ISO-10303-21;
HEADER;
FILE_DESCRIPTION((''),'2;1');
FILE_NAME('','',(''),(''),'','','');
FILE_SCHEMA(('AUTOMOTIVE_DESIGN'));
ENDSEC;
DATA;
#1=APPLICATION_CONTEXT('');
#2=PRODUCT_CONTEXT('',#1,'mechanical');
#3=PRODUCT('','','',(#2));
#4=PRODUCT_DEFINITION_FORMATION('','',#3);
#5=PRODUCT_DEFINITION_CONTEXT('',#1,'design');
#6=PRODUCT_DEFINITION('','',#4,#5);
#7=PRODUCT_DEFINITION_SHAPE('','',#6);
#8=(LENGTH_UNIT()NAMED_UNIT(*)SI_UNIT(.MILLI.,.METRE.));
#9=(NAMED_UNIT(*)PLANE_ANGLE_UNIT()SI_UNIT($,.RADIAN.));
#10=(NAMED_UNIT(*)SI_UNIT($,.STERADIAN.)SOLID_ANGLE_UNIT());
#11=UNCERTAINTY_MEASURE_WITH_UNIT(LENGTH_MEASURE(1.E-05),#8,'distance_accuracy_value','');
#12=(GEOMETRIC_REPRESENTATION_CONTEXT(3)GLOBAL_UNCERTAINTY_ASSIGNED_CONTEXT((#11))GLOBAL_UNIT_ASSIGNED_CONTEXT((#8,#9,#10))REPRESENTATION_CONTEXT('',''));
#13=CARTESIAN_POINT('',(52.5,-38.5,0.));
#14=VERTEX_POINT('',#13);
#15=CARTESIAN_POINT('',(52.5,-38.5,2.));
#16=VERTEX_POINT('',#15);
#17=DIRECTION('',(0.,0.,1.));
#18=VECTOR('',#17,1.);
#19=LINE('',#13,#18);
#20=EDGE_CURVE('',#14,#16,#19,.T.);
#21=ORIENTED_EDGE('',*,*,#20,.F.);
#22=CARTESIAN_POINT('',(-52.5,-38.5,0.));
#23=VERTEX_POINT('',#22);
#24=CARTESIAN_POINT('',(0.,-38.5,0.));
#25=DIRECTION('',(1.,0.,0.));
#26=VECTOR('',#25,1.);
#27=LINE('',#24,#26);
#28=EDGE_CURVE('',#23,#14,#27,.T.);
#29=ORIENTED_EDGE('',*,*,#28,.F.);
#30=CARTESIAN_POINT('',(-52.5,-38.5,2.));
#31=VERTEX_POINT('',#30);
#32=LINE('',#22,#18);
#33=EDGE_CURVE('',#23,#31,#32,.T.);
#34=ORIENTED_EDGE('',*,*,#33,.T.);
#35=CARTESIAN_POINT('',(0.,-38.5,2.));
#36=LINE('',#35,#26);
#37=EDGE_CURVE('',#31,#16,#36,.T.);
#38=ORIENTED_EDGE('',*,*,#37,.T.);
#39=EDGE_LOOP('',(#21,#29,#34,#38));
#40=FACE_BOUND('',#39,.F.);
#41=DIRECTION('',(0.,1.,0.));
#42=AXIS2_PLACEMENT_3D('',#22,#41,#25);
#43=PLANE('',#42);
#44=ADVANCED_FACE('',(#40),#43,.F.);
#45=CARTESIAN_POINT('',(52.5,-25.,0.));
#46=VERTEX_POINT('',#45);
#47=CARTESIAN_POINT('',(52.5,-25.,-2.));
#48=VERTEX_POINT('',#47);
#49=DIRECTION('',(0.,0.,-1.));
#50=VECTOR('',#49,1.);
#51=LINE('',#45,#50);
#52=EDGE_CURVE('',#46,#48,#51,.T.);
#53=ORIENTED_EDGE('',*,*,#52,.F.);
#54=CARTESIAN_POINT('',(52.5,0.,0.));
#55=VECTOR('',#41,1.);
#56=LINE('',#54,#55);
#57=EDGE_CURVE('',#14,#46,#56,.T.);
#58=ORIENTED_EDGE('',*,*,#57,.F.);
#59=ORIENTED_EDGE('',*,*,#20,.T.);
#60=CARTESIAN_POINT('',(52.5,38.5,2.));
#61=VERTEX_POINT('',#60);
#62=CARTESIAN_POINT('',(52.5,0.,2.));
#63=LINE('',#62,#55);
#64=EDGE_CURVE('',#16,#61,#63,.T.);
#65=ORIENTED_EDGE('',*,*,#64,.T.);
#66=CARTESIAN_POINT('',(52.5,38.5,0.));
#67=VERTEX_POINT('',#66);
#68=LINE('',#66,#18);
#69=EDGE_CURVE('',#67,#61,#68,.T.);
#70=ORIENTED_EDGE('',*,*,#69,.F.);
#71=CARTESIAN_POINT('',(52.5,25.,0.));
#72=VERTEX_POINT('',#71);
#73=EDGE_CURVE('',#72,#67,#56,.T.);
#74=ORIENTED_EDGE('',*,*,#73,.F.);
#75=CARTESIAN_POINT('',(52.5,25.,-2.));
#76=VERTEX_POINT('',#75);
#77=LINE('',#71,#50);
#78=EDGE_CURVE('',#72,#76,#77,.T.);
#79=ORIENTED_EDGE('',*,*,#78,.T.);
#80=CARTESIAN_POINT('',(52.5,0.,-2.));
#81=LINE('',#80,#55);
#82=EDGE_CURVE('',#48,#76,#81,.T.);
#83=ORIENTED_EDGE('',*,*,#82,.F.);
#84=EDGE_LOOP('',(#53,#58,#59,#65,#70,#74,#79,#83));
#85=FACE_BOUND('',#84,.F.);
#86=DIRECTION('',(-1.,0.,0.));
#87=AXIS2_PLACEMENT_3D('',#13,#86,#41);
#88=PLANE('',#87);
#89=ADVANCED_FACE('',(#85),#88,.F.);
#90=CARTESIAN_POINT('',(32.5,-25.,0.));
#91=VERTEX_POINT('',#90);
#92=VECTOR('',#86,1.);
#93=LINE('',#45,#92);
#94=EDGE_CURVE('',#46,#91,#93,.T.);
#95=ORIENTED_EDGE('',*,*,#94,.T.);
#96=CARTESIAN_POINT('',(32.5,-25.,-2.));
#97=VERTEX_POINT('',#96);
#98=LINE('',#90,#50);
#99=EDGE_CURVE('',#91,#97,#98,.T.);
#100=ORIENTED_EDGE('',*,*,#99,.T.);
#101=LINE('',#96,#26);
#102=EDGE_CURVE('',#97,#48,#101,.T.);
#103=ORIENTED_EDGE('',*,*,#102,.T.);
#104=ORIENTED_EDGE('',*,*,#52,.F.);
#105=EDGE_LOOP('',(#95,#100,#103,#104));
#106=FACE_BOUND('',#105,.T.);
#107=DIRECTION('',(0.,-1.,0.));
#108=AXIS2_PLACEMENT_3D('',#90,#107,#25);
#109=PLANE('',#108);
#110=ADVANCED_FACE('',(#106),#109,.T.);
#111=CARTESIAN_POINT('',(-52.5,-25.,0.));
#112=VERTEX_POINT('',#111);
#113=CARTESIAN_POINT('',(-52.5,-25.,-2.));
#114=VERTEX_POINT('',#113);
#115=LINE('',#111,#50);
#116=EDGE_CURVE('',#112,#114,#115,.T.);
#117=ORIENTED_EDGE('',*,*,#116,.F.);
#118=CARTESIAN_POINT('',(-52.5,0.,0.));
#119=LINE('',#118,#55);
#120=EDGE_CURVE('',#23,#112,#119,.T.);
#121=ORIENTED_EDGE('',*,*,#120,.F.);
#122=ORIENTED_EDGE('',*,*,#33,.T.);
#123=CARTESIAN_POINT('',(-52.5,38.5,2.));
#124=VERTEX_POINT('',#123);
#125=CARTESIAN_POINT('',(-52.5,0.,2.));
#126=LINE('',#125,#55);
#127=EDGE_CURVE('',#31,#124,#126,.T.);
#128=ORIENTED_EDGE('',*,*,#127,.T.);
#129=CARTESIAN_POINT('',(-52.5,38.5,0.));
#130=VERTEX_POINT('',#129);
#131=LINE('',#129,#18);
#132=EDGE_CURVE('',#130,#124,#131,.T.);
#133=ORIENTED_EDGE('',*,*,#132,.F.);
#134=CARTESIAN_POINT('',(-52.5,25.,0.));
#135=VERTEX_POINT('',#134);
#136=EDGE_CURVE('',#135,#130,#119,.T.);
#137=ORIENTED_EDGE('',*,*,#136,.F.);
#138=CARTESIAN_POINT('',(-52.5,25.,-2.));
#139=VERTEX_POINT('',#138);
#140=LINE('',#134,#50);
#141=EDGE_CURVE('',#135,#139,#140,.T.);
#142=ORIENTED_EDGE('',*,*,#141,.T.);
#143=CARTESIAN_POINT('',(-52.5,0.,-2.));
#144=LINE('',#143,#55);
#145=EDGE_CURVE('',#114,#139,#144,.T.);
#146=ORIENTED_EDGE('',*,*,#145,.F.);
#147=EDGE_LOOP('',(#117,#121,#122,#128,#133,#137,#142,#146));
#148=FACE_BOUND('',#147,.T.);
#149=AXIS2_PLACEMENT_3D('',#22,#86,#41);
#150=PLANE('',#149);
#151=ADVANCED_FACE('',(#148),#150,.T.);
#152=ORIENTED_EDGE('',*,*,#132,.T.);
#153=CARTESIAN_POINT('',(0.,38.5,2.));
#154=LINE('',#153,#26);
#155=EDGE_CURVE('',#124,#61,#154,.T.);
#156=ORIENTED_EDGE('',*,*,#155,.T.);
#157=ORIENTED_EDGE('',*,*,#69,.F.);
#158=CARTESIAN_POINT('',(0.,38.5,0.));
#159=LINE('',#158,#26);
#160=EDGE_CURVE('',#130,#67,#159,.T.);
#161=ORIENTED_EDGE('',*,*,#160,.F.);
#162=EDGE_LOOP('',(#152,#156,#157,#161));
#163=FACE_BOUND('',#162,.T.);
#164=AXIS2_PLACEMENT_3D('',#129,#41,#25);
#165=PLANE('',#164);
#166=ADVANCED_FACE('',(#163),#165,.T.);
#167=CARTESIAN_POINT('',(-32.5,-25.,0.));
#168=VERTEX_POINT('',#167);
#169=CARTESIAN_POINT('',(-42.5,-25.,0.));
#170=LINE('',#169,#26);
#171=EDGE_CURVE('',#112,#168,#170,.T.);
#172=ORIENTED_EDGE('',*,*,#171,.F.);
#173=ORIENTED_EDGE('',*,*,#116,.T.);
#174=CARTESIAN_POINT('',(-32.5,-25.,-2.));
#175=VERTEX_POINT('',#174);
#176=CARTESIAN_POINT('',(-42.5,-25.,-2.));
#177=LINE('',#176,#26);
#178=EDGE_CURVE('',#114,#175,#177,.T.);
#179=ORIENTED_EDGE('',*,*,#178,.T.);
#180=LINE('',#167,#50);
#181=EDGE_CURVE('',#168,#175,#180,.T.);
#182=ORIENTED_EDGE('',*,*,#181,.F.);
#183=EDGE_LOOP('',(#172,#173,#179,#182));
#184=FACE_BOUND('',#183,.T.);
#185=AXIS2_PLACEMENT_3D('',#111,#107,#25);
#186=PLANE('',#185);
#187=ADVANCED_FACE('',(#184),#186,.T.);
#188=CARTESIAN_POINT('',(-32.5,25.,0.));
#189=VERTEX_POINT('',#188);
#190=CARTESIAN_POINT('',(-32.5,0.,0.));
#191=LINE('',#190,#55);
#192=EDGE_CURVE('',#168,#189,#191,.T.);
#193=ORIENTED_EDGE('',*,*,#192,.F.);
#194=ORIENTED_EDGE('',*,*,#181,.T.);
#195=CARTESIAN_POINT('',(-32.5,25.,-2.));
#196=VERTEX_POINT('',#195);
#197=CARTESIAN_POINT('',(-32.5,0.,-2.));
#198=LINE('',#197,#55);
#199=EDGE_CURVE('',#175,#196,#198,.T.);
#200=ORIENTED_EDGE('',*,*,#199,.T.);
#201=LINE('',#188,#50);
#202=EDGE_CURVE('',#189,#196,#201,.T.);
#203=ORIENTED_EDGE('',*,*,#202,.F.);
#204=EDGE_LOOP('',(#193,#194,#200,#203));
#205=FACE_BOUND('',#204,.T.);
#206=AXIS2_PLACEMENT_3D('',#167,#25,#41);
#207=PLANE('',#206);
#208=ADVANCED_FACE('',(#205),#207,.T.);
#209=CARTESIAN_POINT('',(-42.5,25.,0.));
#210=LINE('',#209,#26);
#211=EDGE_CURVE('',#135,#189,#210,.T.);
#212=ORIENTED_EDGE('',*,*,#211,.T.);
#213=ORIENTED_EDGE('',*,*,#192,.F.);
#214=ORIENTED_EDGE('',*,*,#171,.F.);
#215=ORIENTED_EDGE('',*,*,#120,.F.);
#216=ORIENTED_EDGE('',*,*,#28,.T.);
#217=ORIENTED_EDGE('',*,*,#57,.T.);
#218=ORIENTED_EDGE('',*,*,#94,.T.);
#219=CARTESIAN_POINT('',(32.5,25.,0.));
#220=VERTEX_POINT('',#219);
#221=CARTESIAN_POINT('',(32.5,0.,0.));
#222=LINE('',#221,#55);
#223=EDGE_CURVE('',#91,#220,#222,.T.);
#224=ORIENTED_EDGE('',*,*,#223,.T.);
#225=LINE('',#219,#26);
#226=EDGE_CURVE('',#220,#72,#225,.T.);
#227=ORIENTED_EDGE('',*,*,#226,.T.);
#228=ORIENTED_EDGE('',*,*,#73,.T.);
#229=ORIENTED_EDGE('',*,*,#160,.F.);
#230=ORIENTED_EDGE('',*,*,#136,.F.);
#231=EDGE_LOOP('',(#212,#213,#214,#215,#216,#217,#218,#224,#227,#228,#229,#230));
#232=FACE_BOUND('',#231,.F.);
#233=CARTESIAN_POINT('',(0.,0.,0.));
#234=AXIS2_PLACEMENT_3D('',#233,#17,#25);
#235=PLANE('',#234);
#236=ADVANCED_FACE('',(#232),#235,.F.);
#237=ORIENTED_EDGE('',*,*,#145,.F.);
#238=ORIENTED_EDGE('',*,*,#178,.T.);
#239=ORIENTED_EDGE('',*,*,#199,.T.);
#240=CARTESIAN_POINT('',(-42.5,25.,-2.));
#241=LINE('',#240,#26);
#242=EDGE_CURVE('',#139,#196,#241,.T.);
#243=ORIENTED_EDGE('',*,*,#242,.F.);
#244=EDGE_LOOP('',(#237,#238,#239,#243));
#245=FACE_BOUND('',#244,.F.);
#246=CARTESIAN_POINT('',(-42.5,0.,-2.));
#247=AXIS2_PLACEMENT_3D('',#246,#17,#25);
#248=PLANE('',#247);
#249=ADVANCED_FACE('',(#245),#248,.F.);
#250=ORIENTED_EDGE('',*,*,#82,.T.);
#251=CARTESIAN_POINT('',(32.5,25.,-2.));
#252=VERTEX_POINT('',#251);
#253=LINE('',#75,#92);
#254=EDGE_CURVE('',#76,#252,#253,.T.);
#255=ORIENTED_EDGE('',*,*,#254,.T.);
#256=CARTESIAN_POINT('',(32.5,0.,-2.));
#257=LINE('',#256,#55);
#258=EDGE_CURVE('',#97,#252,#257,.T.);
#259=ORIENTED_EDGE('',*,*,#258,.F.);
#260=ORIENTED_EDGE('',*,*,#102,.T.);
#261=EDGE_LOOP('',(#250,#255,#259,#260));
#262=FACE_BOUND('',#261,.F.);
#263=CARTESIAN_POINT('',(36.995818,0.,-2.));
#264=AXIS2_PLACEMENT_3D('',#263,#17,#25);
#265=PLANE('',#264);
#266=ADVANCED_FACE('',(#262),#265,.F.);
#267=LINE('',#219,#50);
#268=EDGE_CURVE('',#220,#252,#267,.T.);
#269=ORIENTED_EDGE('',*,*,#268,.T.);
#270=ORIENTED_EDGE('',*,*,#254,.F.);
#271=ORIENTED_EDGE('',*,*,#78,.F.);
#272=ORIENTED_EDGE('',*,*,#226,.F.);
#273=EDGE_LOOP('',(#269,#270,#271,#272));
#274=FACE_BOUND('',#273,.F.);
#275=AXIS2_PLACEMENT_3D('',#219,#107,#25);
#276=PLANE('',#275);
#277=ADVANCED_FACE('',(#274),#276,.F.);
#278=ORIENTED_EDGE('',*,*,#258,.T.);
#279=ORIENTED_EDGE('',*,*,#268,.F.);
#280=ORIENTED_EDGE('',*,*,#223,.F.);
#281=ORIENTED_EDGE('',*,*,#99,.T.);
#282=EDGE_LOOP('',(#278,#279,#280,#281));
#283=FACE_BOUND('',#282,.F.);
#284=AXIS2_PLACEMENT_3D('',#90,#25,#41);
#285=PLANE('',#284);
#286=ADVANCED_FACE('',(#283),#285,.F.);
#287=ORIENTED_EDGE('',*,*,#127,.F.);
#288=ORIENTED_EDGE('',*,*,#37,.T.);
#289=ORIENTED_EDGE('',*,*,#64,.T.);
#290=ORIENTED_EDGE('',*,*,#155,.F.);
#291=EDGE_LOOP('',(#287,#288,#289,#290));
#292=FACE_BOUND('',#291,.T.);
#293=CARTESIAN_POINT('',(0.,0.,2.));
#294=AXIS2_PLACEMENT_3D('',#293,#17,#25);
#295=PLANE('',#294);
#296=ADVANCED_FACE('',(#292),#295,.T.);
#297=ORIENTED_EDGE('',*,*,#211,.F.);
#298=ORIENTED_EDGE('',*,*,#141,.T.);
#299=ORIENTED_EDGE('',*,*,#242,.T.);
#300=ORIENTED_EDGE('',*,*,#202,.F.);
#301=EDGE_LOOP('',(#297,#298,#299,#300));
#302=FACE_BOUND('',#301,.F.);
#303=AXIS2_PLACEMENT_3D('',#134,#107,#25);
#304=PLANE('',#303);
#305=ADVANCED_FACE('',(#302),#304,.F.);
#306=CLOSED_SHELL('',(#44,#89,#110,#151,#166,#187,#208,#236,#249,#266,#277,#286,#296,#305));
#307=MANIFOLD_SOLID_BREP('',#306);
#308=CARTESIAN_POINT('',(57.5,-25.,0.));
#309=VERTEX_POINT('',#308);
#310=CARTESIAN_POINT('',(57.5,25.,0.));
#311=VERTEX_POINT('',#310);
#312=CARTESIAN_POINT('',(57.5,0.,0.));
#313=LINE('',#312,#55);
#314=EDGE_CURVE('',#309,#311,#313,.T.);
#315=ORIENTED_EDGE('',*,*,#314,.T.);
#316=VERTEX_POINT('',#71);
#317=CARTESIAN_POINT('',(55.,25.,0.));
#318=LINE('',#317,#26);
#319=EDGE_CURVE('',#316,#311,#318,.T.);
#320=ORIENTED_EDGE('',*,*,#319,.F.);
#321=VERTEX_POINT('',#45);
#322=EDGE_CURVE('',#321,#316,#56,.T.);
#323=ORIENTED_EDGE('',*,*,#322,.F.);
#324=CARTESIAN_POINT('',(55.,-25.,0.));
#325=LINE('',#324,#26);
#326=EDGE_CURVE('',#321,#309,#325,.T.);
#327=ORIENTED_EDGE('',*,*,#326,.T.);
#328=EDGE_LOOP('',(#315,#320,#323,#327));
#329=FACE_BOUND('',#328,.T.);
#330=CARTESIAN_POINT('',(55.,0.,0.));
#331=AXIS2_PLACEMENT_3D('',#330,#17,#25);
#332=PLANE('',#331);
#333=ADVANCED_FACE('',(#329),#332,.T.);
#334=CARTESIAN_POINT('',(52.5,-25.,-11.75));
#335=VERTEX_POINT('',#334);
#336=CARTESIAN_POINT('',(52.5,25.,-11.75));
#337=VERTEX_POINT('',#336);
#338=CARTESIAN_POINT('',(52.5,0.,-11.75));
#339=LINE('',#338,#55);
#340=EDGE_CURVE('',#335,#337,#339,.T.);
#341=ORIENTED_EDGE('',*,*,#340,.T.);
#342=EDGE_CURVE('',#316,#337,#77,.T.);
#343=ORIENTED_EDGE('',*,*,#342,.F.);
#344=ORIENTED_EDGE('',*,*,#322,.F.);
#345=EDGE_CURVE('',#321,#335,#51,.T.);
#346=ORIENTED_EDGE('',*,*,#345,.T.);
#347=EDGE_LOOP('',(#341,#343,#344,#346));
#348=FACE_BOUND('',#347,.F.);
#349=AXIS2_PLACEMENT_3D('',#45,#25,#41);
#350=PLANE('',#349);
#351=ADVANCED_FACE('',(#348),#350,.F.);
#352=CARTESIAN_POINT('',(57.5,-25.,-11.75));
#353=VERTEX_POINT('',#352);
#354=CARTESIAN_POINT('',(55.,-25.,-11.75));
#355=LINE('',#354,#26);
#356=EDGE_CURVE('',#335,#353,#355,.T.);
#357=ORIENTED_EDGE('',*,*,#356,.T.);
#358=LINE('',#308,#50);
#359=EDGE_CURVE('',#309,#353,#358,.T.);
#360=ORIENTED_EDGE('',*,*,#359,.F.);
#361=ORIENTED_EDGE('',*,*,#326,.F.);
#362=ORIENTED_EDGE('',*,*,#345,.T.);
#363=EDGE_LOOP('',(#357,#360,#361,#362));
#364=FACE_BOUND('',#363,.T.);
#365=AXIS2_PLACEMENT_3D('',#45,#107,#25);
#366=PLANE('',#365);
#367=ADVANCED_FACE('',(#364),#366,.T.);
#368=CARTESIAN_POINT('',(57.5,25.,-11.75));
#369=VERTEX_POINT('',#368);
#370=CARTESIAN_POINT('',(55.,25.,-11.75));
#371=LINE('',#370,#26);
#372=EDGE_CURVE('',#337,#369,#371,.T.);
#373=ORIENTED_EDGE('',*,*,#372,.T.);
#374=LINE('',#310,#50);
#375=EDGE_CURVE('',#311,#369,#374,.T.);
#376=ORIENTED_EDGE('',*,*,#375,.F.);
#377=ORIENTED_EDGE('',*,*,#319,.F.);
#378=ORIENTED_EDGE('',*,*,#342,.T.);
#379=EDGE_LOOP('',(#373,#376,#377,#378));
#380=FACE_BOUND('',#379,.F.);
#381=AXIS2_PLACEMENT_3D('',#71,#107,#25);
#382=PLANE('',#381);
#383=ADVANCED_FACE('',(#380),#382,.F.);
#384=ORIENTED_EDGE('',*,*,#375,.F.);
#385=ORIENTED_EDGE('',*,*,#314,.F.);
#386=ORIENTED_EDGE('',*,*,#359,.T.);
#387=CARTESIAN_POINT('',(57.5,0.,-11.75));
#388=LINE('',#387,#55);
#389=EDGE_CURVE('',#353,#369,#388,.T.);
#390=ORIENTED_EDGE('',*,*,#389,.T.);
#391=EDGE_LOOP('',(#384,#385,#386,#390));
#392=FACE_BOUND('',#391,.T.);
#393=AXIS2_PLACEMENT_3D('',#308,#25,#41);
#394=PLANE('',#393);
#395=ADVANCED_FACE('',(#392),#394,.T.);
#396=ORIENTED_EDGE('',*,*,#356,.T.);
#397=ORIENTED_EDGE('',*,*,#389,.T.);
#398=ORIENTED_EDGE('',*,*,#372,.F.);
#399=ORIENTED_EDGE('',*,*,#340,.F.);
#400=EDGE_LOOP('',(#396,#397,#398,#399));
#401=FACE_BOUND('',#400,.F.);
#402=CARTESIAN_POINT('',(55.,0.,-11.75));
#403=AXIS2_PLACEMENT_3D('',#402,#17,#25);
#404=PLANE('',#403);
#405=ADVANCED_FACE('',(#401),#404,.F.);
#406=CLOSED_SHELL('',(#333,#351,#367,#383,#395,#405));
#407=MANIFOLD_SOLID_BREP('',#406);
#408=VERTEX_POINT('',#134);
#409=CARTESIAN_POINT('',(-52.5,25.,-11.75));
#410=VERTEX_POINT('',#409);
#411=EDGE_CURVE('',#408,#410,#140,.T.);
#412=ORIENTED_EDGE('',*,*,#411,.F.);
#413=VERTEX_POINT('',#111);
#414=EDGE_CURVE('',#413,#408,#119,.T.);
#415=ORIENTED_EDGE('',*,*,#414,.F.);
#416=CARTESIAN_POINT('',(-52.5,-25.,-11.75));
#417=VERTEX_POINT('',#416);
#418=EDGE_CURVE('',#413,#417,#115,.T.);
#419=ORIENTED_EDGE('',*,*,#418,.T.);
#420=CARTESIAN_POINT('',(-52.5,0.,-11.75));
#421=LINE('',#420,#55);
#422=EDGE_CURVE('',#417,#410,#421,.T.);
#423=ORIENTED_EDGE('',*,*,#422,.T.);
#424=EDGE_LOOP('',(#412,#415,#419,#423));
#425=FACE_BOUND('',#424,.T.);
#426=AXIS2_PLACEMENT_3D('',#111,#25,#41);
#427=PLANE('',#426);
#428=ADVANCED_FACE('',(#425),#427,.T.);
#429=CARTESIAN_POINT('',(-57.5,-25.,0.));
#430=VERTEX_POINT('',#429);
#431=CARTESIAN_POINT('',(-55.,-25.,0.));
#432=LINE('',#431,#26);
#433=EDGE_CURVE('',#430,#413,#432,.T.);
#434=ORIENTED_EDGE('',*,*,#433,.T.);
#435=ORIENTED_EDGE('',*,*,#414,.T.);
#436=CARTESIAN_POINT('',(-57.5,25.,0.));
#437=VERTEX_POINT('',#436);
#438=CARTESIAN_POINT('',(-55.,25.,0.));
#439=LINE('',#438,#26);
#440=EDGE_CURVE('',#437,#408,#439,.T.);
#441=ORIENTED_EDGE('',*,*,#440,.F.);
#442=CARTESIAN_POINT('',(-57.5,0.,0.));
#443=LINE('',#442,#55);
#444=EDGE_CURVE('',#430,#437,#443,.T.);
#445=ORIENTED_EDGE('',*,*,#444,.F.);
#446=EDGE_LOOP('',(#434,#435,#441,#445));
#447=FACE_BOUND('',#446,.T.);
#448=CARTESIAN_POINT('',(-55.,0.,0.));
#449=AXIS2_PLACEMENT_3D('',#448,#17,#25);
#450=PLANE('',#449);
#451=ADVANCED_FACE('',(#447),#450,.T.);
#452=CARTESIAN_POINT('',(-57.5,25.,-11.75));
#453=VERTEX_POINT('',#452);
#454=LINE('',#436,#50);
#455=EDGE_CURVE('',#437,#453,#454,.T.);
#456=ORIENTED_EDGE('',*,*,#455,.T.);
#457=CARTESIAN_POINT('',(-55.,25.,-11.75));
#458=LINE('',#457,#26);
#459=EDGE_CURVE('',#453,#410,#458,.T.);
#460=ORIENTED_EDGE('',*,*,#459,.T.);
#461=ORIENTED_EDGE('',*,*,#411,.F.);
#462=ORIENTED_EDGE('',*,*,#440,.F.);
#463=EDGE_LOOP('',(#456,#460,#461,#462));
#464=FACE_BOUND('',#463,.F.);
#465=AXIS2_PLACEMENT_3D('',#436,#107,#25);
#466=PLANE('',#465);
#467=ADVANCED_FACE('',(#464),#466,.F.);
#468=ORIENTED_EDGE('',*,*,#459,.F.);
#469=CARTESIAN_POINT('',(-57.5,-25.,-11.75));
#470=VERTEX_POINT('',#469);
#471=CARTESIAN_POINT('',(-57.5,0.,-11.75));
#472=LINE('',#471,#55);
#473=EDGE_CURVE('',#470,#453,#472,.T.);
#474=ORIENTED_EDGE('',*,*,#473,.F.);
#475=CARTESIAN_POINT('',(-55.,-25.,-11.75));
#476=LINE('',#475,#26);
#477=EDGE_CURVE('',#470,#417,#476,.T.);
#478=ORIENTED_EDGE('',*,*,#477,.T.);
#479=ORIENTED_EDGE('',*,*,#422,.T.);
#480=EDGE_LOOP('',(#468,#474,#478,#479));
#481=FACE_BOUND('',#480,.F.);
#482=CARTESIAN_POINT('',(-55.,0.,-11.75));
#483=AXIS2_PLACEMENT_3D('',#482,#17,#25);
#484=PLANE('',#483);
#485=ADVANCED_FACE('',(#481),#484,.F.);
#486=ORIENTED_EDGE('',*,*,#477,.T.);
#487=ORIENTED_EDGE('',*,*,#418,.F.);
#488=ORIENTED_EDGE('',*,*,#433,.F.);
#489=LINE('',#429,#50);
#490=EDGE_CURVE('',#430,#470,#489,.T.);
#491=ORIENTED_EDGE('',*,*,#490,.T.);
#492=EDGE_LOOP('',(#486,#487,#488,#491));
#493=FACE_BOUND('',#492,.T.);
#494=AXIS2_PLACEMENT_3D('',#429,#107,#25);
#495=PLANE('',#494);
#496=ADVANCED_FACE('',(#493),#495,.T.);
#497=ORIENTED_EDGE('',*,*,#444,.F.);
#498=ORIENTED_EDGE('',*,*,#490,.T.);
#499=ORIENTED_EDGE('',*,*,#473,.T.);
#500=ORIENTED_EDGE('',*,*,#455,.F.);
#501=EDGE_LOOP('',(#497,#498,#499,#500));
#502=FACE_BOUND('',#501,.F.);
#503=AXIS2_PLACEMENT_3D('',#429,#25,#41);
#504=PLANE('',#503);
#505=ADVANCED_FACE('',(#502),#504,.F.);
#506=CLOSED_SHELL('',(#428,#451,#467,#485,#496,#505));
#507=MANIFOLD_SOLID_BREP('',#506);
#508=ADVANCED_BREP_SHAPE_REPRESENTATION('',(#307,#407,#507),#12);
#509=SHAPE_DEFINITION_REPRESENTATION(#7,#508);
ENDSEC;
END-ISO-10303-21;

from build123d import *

# Parameters (mm, degrees)
F0_W     = 105
F0_H     = 77
F0_W_2   = 5
F0_H_2   = 50
F2_DEPTH = 2
F1_W     = 5
F1_H     = 50
F3_DEPTH = 11.75
F1_W_2   = 20
F1_W_3   = 8.9916351438
F1_W_4   = 6.0083648562
F4_DEPTH = 2


with BuildPart() as f2:
    # F0 (on Top) → F2 (new body)
    with BuildSketch(Plane.XY):
        Rectangle(F0_W, F0_H)
        with Locations((43.9916351438, 0)):
            Rectangle(F0_W_2, F0_H_2, mode=Mode.SUBTRACT)
        with Locations((43.9916351438, 0)):
            Rectangle(F0_W_2, F0_H_2)
    extrude(amount=F2_DEPTH)

    # F1 (on face) + F0 (on Top) → F4 (join)
    with BuildSketch(Plane.XY):
        with Locations((-42.5, 0)):
            Rectangle(F1_W_2, F1_H)
        with Locations((36.9958175719, 0)):
            Rectangle(F1_W_3, F1_H)
        with Locations((49.4958175719, 0)):
            Rectangle(F1_W_4, F1_H)
    with BuildSketch(Plane.XY):
        with Locations((43.9916351438, 0)):
            Rectangle(F0_W_2, F0_H_2)
    extrude(amount=-F4_DEPTH)


with BuildPart() as f3:
    # F1 (on face) → F3 (new body)
    with BuildSketch(Plane.XY):
        with Locations((-55, 0)):
            Rectangle(F1_W, F1_H)
    extrude(amount=-F3_DEPTH)


with BuildPart() as f3b:
    # F1 (on face) → F3, piece 2 (new body)
    with BuildSketch(Plane.XY):
        with Locations((55, 0)):
            Rectangle(F1_W, F1_H)
    extrude(amount=-F3_DEPTH)


solid = Compound([f2.part, f3.part, f3b.part])
